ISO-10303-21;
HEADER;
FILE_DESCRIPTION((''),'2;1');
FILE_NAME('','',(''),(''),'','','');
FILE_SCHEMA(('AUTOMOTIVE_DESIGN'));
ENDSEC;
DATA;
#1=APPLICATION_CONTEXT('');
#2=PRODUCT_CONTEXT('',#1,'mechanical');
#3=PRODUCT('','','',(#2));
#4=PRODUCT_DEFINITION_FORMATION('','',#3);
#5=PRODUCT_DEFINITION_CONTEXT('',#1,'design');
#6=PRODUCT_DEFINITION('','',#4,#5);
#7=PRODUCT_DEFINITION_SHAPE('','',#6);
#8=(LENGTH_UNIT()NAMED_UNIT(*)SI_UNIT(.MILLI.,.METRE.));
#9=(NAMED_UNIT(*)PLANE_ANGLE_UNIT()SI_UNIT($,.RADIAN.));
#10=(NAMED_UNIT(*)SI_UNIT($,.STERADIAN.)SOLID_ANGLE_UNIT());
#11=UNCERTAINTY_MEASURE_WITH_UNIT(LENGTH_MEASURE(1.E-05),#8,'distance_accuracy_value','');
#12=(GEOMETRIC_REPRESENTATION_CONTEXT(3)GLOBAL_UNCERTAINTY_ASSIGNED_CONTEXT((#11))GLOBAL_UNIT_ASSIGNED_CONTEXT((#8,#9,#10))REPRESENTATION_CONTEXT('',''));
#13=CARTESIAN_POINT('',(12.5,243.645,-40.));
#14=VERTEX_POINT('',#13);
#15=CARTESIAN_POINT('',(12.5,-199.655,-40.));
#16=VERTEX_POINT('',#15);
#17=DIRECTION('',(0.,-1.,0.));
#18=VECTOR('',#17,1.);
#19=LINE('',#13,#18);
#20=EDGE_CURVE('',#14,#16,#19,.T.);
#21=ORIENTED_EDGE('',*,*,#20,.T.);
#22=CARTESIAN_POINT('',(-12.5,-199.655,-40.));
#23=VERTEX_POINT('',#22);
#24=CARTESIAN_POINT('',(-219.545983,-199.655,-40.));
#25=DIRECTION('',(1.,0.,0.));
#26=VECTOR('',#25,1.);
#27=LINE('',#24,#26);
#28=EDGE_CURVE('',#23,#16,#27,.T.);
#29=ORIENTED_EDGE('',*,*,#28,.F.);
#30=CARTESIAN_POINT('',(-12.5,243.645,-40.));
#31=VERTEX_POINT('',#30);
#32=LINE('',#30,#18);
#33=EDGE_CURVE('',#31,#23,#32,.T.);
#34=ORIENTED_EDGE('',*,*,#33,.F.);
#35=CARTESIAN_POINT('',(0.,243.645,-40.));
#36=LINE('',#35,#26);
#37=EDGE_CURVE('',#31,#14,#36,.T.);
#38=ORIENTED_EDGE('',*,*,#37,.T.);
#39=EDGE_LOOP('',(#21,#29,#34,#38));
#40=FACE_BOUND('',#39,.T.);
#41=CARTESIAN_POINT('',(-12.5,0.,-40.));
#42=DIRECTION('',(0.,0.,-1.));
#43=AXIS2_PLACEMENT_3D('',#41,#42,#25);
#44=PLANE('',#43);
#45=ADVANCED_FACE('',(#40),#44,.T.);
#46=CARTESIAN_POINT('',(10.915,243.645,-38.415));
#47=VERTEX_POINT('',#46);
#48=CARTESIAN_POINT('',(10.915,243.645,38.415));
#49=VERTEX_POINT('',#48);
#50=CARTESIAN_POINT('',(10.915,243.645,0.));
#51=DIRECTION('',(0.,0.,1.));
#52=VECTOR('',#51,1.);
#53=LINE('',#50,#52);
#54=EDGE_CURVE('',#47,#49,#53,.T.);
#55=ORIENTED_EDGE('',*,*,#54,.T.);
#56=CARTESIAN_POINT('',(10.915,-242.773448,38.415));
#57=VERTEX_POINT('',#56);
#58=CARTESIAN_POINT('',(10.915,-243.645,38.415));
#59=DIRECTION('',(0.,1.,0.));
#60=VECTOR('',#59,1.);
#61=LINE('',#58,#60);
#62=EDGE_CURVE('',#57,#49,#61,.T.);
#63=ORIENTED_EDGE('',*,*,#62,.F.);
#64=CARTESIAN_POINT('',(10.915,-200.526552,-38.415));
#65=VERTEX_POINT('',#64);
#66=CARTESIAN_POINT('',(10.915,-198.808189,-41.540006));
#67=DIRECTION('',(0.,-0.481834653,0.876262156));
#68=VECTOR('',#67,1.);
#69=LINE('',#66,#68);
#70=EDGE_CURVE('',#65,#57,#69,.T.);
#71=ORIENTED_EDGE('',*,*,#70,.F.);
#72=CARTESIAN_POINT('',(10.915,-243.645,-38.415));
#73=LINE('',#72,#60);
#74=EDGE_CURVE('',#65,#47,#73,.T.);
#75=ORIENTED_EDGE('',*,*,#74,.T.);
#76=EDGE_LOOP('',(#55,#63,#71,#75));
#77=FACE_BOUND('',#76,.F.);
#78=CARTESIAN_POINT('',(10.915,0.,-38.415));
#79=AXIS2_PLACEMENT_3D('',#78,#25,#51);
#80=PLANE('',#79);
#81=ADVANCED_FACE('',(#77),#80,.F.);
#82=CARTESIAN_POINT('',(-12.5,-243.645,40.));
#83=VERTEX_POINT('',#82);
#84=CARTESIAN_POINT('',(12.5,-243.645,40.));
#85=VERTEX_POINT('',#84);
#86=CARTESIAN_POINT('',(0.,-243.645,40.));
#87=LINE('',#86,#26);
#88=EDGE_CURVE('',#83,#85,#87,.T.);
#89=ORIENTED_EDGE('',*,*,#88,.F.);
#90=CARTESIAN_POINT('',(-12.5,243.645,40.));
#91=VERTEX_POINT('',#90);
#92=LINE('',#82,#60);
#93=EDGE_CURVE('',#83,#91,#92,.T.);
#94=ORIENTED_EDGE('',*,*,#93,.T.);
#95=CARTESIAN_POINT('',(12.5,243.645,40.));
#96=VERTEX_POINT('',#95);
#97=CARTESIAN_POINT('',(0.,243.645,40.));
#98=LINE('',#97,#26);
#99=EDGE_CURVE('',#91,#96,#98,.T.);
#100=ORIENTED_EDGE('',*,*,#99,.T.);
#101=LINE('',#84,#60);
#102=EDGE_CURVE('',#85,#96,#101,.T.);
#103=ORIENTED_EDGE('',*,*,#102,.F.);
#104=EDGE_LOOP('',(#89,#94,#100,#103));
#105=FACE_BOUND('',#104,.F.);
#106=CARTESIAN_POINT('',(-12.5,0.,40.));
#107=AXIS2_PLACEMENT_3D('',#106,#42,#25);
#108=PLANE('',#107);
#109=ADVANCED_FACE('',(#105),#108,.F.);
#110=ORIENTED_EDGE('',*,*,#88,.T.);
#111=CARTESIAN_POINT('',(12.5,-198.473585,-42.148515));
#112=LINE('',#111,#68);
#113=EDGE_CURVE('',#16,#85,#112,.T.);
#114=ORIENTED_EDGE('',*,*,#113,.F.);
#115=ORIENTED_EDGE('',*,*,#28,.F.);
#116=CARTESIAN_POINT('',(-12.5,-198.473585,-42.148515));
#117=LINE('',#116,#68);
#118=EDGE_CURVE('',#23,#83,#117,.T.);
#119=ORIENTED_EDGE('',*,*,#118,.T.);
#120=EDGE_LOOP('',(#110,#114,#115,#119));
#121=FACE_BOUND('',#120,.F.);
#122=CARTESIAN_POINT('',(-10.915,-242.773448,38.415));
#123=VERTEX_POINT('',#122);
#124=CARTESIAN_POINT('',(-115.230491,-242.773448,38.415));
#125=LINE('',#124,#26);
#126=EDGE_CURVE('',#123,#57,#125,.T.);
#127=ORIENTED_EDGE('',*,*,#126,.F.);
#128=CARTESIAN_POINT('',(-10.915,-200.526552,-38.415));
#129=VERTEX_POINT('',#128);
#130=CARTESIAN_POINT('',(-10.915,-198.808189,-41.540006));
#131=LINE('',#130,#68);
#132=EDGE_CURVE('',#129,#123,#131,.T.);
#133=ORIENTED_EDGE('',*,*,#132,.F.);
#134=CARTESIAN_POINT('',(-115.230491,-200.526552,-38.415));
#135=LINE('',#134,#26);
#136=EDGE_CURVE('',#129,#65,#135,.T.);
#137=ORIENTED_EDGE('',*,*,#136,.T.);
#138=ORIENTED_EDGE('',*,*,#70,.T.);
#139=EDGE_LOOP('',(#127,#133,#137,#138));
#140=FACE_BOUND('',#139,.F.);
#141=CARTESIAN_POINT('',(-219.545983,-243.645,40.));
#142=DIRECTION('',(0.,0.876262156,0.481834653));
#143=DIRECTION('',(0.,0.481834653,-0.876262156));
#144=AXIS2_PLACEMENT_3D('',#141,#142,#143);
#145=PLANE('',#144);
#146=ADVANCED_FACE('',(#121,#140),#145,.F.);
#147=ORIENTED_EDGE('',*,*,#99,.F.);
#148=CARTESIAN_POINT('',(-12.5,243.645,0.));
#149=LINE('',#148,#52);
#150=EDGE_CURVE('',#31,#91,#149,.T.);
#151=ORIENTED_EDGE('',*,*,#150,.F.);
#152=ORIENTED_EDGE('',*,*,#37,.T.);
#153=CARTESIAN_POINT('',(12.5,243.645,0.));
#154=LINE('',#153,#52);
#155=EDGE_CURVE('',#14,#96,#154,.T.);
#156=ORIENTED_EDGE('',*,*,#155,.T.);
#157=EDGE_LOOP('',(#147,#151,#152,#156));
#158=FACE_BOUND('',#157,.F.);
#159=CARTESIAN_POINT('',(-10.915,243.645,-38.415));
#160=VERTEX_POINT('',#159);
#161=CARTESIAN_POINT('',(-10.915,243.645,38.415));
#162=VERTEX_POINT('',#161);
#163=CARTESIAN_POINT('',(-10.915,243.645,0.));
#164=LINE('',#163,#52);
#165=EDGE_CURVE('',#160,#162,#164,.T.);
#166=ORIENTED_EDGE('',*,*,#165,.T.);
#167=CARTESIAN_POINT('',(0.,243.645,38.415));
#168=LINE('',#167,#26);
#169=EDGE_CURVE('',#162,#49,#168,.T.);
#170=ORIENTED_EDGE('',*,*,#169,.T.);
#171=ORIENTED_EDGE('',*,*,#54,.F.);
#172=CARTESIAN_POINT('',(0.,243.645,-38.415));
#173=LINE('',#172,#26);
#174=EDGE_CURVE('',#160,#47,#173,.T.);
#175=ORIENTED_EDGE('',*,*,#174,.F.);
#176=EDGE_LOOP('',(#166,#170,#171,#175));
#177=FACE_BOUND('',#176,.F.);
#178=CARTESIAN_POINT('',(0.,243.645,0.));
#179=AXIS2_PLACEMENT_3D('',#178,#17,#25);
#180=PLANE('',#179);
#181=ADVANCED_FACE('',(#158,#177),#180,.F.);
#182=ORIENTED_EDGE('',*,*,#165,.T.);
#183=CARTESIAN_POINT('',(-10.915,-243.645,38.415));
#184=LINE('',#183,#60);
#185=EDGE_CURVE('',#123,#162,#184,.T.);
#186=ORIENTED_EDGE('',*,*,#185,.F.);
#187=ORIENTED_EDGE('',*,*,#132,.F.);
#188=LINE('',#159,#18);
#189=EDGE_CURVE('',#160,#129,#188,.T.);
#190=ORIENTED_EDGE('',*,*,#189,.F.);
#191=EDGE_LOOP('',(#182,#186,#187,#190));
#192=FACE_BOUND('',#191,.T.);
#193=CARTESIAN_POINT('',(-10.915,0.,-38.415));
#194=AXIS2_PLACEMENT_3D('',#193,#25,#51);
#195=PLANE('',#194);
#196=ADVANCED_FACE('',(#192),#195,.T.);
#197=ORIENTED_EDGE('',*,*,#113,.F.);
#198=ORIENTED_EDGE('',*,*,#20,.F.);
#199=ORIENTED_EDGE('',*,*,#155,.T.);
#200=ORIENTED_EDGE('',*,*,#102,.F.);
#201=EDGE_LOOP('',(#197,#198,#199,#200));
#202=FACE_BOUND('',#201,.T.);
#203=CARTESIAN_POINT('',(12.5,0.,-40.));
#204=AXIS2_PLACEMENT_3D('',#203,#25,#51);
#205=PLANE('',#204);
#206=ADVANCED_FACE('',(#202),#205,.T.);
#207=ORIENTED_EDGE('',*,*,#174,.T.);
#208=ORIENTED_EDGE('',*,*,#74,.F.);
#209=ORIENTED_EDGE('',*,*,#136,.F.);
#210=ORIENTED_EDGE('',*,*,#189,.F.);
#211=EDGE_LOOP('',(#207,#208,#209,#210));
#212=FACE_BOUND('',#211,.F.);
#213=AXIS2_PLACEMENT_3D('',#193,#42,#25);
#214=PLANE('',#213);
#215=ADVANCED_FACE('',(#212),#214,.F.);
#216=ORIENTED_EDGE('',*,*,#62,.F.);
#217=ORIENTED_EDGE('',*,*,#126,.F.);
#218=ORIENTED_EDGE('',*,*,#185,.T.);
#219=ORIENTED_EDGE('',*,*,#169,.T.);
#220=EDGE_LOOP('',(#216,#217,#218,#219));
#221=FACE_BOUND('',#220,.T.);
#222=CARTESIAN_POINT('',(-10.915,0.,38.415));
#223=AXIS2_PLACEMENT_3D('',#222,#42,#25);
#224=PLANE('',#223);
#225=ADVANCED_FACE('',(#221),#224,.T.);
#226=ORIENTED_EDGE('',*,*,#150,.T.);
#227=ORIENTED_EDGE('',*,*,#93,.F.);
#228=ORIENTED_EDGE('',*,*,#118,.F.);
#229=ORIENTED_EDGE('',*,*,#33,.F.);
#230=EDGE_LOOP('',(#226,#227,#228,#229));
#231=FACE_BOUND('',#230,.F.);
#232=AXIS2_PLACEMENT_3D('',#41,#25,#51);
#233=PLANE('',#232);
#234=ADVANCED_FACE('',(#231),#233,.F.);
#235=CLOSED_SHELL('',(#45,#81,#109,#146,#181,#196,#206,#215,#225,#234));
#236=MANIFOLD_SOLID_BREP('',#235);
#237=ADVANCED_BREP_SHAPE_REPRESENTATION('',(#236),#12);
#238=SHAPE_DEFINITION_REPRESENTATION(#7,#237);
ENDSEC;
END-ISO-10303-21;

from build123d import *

# Parameters (mm, degrees)
F0_W        = 25
F0_H        = 80
F0_W_2      = 21.83
F0_H_2      = 76.83
F1_DEPTH    = 243.645
F2_T1_DEPTH = 439.0919651514


# Not quite as in the source:
# - a fillet or chamfer that OpenCascade refuses, or shapes differently, is made with other operations: its cross-section is extruded or revolved along the edge and cut away or added


with BuildPart() as f1:
    # F0 (on Front) → F1 (new body, symmetric)
    with BuildSketch(Plane.XZ):
        Rectangle(F0_W, F0_H)
        Rectangle(F0_W_2, F0_H_2, mode=Mode.SUBTRACT)
    extrude(amount=F1_DEPTH, both=True)

    # F2: chamfer of 80 x 43.99 on 1 edges, made by hand

    # F2_s2 → F2_t1 (cut)
    with BuildSketch(Plane.YZ.offset(-219.5459825757)):
        Polygon((-243.645, 40), (-199.655, -40), (-243.645, -40), align=None)
    extrude(amount=F2_T1_DEPTH, mode=Mode.SUBTRACT)


solid = f1.part
